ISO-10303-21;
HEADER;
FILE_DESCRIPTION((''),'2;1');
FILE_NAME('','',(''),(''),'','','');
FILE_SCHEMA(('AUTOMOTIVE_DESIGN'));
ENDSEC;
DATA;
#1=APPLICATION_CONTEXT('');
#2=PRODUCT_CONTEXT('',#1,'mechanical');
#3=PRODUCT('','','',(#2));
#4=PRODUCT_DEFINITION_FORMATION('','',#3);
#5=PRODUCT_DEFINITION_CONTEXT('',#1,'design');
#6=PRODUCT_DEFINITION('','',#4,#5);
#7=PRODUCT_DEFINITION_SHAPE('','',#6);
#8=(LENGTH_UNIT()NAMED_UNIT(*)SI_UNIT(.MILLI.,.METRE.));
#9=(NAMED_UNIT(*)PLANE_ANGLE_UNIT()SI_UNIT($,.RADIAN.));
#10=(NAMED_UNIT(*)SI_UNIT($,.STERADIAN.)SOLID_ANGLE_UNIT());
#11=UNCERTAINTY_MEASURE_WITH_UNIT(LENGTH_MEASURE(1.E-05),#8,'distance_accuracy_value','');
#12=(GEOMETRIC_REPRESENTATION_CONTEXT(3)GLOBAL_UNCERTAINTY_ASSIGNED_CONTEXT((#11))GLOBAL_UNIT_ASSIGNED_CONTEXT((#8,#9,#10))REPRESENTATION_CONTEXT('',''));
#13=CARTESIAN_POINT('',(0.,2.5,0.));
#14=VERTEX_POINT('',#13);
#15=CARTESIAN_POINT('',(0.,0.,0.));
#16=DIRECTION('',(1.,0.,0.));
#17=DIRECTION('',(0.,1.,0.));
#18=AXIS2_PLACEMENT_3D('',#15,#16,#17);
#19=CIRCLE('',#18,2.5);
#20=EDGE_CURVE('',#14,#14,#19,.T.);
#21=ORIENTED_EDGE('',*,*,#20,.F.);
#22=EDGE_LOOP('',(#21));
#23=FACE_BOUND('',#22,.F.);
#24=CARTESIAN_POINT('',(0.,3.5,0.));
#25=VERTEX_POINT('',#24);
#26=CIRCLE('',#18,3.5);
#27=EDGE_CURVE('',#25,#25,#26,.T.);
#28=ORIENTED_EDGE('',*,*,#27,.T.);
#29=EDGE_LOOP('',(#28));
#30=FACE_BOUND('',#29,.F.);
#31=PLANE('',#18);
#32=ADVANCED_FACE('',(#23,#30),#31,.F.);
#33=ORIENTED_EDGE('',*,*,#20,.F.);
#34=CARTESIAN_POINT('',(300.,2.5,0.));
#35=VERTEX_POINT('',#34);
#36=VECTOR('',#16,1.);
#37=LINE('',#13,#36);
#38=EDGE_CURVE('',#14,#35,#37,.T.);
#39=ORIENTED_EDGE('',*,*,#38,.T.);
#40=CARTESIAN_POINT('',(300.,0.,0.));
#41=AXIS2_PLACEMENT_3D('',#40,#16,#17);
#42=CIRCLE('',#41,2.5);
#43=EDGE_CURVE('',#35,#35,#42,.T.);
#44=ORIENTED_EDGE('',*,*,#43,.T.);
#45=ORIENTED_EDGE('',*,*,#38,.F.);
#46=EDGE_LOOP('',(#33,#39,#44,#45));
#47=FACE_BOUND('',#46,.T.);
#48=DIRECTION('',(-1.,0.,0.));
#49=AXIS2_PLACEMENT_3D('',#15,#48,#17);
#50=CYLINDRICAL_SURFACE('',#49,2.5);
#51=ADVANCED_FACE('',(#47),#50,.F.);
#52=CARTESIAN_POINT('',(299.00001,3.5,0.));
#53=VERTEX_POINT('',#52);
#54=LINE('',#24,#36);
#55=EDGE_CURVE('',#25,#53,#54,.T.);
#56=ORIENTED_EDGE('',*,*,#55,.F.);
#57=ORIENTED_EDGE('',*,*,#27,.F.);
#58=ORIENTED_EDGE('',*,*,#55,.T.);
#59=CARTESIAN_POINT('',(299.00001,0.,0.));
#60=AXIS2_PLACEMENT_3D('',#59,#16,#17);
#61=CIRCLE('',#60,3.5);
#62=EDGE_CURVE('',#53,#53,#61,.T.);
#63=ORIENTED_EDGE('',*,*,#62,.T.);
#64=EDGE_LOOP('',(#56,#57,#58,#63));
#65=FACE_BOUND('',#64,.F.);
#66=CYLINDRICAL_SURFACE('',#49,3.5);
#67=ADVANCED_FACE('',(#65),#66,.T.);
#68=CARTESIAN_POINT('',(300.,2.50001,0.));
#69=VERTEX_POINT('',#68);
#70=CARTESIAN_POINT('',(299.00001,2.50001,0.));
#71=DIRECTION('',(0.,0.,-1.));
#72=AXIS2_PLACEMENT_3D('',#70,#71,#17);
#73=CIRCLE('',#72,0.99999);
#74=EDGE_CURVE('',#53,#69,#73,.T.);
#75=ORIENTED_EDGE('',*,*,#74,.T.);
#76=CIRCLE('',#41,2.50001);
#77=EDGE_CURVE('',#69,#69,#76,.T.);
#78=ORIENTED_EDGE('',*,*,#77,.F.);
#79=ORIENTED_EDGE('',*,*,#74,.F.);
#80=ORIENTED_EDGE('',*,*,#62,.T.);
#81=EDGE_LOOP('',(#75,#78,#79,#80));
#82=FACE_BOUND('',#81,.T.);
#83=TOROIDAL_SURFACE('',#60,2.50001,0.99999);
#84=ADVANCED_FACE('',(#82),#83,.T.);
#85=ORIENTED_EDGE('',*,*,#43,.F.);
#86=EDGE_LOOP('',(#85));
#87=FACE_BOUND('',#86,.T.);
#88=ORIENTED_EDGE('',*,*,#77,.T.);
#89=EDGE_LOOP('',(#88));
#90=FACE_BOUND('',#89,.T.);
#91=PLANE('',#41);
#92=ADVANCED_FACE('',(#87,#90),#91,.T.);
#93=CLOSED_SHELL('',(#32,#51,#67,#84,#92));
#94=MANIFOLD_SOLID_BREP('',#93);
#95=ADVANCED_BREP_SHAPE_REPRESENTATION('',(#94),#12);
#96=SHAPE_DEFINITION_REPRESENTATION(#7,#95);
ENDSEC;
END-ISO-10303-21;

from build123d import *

# Parameters (mm, degrees)
F0_R     = 3.5
F0_R_2   = 2.5
F1_DEPTH = 300
F2_R     = 0.99999


# Not quite as in the source:
# - a fillet or chamfer is up to 0.001 mm smaller than in the source, because OpenCascade refuses the exact size


with BuildPart() as f1:
    # F0 (on Right) → F1 (new body)
    with BuildSketch(Plane.YZ):
        Circle(F0_R)
        Circle(F0_R_2, mode=Mode.SUBTRACT)
    extrude(amount=F1_DEPTH)

    # F2 (radius 1 in the source; OpenCascade refuses exactly that, so slightly less here)
    f2_edges = [f1.edges().sort_by_distance(p)[0] for p in [
        (300, -3.5, 0),
    ]]
    fillet(f2_edges, radius=F2_R)


solid = f1.part
